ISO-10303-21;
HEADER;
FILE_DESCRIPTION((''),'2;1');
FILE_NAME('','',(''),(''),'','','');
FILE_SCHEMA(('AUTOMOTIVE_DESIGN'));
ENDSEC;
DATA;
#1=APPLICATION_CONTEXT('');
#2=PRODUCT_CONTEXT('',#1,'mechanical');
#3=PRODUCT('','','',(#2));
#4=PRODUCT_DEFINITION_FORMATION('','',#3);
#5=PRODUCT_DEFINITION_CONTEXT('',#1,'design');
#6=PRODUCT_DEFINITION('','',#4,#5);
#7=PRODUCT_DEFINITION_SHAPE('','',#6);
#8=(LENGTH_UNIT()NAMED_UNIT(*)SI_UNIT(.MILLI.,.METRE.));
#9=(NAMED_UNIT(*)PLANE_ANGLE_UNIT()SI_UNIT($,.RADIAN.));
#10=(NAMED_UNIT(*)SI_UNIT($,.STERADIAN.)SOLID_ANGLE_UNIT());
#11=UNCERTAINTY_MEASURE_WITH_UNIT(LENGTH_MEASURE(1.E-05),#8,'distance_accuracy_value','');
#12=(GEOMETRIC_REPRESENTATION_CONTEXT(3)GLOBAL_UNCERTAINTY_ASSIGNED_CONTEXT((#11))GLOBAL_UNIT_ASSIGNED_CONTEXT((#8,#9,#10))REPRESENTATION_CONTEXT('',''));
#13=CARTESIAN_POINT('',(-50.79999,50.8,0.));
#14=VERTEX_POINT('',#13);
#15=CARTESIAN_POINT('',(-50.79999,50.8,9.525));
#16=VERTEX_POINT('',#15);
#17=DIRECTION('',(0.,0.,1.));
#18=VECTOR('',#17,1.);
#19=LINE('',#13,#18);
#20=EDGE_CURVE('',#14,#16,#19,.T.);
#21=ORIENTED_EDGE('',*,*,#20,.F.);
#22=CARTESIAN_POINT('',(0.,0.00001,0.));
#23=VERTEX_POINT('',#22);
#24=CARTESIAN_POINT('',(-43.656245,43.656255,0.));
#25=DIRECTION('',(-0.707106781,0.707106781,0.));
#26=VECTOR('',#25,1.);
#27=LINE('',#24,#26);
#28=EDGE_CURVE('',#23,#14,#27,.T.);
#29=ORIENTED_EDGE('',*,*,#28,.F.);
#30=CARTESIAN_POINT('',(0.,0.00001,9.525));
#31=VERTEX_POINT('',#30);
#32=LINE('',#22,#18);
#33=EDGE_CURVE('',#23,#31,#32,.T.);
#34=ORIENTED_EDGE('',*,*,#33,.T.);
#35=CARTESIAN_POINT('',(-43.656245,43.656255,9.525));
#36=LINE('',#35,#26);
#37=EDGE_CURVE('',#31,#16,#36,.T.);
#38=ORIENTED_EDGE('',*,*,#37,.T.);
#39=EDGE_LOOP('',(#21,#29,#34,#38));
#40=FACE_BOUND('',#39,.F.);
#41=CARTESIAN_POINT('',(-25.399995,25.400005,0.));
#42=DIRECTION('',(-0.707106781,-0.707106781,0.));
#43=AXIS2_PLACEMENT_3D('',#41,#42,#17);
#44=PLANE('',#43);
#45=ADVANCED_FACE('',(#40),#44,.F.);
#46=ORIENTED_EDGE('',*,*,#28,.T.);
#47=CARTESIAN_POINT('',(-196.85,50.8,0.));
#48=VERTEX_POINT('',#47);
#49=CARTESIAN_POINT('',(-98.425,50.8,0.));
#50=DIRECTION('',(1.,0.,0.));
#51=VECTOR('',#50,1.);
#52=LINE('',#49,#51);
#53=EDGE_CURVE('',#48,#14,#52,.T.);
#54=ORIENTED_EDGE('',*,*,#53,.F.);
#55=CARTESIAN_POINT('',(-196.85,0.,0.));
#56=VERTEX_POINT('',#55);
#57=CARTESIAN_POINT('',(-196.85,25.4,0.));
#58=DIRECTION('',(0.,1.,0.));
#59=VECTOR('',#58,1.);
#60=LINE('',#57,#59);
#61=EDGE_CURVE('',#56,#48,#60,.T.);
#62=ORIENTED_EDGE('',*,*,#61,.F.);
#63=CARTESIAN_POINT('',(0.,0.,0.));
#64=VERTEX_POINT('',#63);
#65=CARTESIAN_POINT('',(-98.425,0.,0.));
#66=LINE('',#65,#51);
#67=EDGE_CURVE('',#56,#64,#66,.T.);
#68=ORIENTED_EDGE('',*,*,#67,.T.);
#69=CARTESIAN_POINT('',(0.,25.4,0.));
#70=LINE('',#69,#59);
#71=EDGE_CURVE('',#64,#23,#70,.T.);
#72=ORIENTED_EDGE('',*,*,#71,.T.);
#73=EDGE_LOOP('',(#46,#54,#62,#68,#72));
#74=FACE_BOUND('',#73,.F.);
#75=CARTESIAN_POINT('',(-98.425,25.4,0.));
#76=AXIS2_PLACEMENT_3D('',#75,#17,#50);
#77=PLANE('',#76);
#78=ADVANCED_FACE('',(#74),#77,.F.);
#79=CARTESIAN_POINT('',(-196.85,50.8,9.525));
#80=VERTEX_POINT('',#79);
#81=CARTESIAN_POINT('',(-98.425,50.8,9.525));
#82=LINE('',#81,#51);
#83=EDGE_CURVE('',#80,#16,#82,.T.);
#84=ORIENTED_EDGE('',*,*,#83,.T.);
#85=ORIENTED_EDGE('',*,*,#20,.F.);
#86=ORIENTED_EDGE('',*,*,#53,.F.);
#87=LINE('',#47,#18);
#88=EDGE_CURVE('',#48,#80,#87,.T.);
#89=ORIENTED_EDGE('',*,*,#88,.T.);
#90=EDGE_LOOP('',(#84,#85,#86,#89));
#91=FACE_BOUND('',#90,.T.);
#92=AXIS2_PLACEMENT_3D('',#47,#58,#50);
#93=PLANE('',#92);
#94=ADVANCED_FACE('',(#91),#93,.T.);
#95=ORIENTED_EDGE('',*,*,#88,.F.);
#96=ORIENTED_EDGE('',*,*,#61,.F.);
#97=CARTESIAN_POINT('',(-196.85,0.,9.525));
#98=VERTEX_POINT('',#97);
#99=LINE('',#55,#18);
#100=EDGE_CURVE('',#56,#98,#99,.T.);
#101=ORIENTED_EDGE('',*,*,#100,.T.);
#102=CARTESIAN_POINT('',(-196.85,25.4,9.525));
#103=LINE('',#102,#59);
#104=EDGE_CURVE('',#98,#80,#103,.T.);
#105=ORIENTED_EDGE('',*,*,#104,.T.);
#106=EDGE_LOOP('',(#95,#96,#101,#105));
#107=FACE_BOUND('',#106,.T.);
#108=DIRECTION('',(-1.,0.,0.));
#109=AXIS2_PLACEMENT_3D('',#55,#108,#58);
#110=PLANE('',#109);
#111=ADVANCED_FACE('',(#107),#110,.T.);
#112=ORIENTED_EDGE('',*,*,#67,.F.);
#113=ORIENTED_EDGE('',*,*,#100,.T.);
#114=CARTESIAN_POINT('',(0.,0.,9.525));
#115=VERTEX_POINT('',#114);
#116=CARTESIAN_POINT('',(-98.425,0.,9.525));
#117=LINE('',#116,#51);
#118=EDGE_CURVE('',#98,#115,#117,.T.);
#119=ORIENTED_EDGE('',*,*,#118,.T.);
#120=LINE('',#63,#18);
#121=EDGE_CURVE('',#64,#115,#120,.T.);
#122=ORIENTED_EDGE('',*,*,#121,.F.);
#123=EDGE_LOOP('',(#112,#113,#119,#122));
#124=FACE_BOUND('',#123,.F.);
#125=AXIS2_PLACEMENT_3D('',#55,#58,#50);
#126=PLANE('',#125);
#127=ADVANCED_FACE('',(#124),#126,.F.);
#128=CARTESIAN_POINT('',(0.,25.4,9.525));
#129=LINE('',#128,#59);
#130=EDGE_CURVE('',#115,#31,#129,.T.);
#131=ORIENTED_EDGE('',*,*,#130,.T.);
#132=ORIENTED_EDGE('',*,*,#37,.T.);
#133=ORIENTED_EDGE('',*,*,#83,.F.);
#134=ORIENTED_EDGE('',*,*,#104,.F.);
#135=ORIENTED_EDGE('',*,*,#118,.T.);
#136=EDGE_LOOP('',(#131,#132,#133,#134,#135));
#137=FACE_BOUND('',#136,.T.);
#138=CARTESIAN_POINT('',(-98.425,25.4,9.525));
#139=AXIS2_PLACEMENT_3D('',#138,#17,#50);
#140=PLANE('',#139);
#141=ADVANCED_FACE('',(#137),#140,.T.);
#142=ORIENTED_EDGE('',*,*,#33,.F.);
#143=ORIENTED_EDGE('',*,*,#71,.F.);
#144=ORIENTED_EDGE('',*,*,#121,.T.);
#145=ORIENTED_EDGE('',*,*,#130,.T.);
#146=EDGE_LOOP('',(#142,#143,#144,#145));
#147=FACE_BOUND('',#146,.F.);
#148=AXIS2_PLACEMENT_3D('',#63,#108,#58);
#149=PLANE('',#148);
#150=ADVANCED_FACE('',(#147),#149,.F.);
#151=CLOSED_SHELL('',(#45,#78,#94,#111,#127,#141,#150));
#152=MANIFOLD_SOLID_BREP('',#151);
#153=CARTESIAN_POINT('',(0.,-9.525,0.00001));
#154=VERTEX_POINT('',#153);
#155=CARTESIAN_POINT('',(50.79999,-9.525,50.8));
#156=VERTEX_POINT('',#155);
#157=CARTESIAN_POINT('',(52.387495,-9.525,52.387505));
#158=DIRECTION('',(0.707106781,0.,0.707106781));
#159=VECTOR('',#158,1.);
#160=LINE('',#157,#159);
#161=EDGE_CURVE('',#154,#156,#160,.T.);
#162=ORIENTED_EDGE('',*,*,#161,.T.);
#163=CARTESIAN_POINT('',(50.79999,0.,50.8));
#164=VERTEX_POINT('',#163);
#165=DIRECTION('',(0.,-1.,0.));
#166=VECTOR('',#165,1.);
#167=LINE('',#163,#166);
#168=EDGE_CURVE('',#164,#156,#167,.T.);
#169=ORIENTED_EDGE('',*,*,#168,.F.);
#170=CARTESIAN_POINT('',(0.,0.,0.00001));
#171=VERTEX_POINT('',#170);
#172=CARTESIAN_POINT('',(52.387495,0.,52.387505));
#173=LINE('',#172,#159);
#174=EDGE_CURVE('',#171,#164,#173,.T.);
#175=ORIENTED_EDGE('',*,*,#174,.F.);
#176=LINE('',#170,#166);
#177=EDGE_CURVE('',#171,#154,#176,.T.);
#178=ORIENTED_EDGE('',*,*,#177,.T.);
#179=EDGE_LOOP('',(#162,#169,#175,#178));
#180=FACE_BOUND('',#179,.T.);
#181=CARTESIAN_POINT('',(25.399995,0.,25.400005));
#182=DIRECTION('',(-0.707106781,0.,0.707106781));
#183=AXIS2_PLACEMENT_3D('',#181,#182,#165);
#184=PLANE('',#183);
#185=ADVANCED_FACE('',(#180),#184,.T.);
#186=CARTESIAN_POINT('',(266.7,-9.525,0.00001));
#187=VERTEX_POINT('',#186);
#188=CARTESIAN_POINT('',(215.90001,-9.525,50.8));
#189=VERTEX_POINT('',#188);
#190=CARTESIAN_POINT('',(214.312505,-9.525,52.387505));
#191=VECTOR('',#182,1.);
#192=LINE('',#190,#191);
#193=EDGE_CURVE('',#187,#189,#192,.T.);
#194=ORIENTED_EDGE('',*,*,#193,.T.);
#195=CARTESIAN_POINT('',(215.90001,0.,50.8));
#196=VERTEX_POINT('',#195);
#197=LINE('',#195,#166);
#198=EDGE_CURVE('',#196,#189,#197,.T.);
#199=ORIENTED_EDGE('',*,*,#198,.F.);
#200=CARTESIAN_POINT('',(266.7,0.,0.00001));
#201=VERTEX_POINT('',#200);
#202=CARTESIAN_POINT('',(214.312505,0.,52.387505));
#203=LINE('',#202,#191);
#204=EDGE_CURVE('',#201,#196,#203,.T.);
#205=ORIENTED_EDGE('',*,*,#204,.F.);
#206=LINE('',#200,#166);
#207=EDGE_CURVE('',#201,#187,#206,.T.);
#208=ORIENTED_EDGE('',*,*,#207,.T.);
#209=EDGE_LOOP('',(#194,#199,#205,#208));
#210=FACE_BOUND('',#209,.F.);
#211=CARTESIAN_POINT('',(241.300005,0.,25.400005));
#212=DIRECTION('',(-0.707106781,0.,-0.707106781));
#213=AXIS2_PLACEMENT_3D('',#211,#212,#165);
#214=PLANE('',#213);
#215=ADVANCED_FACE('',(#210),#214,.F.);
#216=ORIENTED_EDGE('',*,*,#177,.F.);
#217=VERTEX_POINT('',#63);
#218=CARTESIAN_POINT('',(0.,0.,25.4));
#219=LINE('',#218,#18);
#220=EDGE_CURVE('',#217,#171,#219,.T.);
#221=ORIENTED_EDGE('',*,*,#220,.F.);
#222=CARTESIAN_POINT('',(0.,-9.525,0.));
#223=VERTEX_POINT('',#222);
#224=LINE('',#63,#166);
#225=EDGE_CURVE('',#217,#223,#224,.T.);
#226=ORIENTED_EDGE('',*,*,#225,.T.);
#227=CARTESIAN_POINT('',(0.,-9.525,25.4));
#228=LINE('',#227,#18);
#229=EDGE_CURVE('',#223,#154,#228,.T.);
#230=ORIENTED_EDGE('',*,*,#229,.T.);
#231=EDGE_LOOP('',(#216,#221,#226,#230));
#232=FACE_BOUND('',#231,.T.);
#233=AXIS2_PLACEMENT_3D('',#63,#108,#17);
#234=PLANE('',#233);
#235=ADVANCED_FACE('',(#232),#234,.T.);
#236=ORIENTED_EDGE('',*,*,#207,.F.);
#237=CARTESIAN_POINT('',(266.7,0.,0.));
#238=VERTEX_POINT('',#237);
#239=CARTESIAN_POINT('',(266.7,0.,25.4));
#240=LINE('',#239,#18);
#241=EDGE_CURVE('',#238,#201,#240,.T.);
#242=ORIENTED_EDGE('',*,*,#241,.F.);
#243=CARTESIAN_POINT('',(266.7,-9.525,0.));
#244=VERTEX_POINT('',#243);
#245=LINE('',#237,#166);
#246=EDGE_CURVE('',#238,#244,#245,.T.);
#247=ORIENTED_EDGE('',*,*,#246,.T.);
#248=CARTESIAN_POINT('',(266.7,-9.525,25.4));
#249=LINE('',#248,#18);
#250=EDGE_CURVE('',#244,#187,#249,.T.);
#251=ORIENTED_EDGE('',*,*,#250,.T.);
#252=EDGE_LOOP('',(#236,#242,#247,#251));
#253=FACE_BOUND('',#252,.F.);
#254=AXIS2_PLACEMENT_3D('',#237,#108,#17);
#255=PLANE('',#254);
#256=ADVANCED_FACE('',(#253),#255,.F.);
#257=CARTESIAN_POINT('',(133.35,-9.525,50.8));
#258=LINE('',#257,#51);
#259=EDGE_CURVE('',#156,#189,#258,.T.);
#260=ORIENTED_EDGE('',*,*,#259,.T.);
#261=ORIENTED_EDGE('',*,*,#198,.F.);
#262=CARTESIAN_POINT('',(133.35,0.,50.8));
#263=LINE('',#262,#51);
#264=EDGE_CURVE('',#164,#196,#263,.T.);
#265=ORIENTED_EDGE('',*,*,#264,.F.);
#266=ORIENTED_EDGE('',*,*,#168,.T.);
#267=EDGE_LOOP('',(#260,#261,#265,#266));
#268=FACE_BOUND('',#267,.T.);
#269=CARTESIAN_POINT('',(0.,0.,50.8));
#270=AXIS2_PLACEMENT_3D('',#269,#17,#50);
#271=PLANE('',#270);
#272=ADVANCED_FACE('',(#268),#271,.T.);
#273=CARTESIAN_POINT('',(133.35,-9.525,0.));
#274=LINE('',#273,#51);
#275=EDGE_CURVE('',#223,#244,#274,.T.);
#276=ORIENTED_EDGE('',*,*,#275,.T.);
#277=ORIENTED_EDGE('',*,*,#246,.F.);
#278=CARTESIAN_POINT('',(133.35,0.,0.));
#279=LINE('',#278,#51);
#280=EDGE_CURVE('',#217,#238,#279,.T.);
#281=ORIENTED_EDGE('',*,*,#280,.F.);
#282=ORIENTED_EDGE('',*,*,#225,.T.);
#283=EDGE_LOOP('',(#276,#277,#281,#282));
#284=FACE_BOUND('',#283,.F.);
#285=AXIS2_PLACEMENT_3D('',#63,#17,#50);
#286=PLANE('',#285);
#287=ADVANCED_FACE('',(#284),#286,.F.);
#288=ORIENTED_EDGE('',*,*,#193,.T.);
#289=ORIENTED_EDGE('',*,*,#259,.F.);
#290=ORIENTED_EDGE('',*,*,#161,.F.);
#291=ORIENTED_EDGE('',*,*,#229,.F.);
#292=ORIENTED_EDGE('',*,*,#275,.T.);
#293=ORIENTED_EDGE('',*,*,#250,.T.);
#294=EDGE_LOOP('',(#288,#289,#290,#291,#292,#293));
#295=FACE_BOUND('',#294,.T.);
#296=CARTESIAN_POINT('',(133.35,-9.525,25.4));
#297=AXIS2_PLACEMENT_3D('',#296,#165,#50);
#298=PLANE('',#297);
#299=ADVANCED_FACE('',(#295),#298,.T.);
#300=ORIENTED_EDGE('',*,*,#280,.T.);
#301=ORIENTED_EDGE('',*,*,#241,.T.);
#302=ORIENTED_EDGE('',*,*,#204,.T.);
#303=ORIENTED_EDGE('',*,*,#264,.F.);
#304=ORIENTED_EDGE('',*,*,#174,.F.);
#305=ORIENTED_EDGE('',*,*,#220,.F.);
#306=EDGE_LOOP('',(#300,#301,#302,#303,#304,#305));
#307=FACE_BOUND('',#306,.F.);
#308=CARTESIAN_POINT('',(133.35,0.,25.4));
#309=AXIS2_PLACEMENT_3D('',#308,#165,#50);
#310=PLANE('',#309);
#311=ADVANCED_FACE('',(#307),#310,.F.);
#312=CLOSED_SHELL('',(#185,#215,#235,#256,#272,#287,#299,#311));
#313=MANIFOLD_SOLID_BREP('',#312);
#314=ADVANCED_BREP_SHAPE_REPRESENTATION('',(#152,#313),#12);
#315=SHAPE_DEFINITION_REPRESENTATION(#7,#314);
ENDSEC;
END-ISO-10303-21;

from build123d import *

# Parameters (mm, degrees)
F0_W     = 266.7
F0_H     = 50.8
F1_DEPTH = 9.525
F2_SIZE  = 50.79999
F3_W     = 196.85
F3_H     = 50.8
F4_DEPTH = 9.525
F5_SIZE  = 50.79999


# Not quite as in the source:
# - a fillet or chamfer is up to 0.001 mm smaller than in the source, because OpenCascade refuses the exact size


with BuildPart() as f1:
    # F0 (on Front) → F1 (new body)
    with BuildSketch(Plane.XZ):
        with Locations((133.35, 25.4)):
            Rectangle(F0_W, F0_H)
    extrude(amount=F1_DEPTH)

    # F2 (size 50.8 in the source; OpenCascade refuses exactly that, so slightly less here)
    f2_edges = [f1.edges().sort_by_distance(p)[0] for p in [
        (266.7, -4.7625, 50.8),
        (0, -4.7625, 50.8),
    ]]
    chamfer(f2_edges, length=F2_SIZE)


with BuildPart() as f4:
    # F3 (on Top) → F4 (new body)
    with BuildSketch(Plane.XY):
        with Locations((-98.425, 25.4)):
            Rectangle(F3_W, F3_H)
    extrude(amount=F4_DEPTH)

    # F5 (size 50.8 in the source; OpenCascade refuses exactly that, so slightly less here)
    f5_edges = [f4.edges().sort_by_distance(p)[0] for p in [
        (0, 50.8, 4.7625),
    ]]
    chamfer(f5_edges, length=F5_SIZE)


solid = Compound([f1.part, f4.part])
